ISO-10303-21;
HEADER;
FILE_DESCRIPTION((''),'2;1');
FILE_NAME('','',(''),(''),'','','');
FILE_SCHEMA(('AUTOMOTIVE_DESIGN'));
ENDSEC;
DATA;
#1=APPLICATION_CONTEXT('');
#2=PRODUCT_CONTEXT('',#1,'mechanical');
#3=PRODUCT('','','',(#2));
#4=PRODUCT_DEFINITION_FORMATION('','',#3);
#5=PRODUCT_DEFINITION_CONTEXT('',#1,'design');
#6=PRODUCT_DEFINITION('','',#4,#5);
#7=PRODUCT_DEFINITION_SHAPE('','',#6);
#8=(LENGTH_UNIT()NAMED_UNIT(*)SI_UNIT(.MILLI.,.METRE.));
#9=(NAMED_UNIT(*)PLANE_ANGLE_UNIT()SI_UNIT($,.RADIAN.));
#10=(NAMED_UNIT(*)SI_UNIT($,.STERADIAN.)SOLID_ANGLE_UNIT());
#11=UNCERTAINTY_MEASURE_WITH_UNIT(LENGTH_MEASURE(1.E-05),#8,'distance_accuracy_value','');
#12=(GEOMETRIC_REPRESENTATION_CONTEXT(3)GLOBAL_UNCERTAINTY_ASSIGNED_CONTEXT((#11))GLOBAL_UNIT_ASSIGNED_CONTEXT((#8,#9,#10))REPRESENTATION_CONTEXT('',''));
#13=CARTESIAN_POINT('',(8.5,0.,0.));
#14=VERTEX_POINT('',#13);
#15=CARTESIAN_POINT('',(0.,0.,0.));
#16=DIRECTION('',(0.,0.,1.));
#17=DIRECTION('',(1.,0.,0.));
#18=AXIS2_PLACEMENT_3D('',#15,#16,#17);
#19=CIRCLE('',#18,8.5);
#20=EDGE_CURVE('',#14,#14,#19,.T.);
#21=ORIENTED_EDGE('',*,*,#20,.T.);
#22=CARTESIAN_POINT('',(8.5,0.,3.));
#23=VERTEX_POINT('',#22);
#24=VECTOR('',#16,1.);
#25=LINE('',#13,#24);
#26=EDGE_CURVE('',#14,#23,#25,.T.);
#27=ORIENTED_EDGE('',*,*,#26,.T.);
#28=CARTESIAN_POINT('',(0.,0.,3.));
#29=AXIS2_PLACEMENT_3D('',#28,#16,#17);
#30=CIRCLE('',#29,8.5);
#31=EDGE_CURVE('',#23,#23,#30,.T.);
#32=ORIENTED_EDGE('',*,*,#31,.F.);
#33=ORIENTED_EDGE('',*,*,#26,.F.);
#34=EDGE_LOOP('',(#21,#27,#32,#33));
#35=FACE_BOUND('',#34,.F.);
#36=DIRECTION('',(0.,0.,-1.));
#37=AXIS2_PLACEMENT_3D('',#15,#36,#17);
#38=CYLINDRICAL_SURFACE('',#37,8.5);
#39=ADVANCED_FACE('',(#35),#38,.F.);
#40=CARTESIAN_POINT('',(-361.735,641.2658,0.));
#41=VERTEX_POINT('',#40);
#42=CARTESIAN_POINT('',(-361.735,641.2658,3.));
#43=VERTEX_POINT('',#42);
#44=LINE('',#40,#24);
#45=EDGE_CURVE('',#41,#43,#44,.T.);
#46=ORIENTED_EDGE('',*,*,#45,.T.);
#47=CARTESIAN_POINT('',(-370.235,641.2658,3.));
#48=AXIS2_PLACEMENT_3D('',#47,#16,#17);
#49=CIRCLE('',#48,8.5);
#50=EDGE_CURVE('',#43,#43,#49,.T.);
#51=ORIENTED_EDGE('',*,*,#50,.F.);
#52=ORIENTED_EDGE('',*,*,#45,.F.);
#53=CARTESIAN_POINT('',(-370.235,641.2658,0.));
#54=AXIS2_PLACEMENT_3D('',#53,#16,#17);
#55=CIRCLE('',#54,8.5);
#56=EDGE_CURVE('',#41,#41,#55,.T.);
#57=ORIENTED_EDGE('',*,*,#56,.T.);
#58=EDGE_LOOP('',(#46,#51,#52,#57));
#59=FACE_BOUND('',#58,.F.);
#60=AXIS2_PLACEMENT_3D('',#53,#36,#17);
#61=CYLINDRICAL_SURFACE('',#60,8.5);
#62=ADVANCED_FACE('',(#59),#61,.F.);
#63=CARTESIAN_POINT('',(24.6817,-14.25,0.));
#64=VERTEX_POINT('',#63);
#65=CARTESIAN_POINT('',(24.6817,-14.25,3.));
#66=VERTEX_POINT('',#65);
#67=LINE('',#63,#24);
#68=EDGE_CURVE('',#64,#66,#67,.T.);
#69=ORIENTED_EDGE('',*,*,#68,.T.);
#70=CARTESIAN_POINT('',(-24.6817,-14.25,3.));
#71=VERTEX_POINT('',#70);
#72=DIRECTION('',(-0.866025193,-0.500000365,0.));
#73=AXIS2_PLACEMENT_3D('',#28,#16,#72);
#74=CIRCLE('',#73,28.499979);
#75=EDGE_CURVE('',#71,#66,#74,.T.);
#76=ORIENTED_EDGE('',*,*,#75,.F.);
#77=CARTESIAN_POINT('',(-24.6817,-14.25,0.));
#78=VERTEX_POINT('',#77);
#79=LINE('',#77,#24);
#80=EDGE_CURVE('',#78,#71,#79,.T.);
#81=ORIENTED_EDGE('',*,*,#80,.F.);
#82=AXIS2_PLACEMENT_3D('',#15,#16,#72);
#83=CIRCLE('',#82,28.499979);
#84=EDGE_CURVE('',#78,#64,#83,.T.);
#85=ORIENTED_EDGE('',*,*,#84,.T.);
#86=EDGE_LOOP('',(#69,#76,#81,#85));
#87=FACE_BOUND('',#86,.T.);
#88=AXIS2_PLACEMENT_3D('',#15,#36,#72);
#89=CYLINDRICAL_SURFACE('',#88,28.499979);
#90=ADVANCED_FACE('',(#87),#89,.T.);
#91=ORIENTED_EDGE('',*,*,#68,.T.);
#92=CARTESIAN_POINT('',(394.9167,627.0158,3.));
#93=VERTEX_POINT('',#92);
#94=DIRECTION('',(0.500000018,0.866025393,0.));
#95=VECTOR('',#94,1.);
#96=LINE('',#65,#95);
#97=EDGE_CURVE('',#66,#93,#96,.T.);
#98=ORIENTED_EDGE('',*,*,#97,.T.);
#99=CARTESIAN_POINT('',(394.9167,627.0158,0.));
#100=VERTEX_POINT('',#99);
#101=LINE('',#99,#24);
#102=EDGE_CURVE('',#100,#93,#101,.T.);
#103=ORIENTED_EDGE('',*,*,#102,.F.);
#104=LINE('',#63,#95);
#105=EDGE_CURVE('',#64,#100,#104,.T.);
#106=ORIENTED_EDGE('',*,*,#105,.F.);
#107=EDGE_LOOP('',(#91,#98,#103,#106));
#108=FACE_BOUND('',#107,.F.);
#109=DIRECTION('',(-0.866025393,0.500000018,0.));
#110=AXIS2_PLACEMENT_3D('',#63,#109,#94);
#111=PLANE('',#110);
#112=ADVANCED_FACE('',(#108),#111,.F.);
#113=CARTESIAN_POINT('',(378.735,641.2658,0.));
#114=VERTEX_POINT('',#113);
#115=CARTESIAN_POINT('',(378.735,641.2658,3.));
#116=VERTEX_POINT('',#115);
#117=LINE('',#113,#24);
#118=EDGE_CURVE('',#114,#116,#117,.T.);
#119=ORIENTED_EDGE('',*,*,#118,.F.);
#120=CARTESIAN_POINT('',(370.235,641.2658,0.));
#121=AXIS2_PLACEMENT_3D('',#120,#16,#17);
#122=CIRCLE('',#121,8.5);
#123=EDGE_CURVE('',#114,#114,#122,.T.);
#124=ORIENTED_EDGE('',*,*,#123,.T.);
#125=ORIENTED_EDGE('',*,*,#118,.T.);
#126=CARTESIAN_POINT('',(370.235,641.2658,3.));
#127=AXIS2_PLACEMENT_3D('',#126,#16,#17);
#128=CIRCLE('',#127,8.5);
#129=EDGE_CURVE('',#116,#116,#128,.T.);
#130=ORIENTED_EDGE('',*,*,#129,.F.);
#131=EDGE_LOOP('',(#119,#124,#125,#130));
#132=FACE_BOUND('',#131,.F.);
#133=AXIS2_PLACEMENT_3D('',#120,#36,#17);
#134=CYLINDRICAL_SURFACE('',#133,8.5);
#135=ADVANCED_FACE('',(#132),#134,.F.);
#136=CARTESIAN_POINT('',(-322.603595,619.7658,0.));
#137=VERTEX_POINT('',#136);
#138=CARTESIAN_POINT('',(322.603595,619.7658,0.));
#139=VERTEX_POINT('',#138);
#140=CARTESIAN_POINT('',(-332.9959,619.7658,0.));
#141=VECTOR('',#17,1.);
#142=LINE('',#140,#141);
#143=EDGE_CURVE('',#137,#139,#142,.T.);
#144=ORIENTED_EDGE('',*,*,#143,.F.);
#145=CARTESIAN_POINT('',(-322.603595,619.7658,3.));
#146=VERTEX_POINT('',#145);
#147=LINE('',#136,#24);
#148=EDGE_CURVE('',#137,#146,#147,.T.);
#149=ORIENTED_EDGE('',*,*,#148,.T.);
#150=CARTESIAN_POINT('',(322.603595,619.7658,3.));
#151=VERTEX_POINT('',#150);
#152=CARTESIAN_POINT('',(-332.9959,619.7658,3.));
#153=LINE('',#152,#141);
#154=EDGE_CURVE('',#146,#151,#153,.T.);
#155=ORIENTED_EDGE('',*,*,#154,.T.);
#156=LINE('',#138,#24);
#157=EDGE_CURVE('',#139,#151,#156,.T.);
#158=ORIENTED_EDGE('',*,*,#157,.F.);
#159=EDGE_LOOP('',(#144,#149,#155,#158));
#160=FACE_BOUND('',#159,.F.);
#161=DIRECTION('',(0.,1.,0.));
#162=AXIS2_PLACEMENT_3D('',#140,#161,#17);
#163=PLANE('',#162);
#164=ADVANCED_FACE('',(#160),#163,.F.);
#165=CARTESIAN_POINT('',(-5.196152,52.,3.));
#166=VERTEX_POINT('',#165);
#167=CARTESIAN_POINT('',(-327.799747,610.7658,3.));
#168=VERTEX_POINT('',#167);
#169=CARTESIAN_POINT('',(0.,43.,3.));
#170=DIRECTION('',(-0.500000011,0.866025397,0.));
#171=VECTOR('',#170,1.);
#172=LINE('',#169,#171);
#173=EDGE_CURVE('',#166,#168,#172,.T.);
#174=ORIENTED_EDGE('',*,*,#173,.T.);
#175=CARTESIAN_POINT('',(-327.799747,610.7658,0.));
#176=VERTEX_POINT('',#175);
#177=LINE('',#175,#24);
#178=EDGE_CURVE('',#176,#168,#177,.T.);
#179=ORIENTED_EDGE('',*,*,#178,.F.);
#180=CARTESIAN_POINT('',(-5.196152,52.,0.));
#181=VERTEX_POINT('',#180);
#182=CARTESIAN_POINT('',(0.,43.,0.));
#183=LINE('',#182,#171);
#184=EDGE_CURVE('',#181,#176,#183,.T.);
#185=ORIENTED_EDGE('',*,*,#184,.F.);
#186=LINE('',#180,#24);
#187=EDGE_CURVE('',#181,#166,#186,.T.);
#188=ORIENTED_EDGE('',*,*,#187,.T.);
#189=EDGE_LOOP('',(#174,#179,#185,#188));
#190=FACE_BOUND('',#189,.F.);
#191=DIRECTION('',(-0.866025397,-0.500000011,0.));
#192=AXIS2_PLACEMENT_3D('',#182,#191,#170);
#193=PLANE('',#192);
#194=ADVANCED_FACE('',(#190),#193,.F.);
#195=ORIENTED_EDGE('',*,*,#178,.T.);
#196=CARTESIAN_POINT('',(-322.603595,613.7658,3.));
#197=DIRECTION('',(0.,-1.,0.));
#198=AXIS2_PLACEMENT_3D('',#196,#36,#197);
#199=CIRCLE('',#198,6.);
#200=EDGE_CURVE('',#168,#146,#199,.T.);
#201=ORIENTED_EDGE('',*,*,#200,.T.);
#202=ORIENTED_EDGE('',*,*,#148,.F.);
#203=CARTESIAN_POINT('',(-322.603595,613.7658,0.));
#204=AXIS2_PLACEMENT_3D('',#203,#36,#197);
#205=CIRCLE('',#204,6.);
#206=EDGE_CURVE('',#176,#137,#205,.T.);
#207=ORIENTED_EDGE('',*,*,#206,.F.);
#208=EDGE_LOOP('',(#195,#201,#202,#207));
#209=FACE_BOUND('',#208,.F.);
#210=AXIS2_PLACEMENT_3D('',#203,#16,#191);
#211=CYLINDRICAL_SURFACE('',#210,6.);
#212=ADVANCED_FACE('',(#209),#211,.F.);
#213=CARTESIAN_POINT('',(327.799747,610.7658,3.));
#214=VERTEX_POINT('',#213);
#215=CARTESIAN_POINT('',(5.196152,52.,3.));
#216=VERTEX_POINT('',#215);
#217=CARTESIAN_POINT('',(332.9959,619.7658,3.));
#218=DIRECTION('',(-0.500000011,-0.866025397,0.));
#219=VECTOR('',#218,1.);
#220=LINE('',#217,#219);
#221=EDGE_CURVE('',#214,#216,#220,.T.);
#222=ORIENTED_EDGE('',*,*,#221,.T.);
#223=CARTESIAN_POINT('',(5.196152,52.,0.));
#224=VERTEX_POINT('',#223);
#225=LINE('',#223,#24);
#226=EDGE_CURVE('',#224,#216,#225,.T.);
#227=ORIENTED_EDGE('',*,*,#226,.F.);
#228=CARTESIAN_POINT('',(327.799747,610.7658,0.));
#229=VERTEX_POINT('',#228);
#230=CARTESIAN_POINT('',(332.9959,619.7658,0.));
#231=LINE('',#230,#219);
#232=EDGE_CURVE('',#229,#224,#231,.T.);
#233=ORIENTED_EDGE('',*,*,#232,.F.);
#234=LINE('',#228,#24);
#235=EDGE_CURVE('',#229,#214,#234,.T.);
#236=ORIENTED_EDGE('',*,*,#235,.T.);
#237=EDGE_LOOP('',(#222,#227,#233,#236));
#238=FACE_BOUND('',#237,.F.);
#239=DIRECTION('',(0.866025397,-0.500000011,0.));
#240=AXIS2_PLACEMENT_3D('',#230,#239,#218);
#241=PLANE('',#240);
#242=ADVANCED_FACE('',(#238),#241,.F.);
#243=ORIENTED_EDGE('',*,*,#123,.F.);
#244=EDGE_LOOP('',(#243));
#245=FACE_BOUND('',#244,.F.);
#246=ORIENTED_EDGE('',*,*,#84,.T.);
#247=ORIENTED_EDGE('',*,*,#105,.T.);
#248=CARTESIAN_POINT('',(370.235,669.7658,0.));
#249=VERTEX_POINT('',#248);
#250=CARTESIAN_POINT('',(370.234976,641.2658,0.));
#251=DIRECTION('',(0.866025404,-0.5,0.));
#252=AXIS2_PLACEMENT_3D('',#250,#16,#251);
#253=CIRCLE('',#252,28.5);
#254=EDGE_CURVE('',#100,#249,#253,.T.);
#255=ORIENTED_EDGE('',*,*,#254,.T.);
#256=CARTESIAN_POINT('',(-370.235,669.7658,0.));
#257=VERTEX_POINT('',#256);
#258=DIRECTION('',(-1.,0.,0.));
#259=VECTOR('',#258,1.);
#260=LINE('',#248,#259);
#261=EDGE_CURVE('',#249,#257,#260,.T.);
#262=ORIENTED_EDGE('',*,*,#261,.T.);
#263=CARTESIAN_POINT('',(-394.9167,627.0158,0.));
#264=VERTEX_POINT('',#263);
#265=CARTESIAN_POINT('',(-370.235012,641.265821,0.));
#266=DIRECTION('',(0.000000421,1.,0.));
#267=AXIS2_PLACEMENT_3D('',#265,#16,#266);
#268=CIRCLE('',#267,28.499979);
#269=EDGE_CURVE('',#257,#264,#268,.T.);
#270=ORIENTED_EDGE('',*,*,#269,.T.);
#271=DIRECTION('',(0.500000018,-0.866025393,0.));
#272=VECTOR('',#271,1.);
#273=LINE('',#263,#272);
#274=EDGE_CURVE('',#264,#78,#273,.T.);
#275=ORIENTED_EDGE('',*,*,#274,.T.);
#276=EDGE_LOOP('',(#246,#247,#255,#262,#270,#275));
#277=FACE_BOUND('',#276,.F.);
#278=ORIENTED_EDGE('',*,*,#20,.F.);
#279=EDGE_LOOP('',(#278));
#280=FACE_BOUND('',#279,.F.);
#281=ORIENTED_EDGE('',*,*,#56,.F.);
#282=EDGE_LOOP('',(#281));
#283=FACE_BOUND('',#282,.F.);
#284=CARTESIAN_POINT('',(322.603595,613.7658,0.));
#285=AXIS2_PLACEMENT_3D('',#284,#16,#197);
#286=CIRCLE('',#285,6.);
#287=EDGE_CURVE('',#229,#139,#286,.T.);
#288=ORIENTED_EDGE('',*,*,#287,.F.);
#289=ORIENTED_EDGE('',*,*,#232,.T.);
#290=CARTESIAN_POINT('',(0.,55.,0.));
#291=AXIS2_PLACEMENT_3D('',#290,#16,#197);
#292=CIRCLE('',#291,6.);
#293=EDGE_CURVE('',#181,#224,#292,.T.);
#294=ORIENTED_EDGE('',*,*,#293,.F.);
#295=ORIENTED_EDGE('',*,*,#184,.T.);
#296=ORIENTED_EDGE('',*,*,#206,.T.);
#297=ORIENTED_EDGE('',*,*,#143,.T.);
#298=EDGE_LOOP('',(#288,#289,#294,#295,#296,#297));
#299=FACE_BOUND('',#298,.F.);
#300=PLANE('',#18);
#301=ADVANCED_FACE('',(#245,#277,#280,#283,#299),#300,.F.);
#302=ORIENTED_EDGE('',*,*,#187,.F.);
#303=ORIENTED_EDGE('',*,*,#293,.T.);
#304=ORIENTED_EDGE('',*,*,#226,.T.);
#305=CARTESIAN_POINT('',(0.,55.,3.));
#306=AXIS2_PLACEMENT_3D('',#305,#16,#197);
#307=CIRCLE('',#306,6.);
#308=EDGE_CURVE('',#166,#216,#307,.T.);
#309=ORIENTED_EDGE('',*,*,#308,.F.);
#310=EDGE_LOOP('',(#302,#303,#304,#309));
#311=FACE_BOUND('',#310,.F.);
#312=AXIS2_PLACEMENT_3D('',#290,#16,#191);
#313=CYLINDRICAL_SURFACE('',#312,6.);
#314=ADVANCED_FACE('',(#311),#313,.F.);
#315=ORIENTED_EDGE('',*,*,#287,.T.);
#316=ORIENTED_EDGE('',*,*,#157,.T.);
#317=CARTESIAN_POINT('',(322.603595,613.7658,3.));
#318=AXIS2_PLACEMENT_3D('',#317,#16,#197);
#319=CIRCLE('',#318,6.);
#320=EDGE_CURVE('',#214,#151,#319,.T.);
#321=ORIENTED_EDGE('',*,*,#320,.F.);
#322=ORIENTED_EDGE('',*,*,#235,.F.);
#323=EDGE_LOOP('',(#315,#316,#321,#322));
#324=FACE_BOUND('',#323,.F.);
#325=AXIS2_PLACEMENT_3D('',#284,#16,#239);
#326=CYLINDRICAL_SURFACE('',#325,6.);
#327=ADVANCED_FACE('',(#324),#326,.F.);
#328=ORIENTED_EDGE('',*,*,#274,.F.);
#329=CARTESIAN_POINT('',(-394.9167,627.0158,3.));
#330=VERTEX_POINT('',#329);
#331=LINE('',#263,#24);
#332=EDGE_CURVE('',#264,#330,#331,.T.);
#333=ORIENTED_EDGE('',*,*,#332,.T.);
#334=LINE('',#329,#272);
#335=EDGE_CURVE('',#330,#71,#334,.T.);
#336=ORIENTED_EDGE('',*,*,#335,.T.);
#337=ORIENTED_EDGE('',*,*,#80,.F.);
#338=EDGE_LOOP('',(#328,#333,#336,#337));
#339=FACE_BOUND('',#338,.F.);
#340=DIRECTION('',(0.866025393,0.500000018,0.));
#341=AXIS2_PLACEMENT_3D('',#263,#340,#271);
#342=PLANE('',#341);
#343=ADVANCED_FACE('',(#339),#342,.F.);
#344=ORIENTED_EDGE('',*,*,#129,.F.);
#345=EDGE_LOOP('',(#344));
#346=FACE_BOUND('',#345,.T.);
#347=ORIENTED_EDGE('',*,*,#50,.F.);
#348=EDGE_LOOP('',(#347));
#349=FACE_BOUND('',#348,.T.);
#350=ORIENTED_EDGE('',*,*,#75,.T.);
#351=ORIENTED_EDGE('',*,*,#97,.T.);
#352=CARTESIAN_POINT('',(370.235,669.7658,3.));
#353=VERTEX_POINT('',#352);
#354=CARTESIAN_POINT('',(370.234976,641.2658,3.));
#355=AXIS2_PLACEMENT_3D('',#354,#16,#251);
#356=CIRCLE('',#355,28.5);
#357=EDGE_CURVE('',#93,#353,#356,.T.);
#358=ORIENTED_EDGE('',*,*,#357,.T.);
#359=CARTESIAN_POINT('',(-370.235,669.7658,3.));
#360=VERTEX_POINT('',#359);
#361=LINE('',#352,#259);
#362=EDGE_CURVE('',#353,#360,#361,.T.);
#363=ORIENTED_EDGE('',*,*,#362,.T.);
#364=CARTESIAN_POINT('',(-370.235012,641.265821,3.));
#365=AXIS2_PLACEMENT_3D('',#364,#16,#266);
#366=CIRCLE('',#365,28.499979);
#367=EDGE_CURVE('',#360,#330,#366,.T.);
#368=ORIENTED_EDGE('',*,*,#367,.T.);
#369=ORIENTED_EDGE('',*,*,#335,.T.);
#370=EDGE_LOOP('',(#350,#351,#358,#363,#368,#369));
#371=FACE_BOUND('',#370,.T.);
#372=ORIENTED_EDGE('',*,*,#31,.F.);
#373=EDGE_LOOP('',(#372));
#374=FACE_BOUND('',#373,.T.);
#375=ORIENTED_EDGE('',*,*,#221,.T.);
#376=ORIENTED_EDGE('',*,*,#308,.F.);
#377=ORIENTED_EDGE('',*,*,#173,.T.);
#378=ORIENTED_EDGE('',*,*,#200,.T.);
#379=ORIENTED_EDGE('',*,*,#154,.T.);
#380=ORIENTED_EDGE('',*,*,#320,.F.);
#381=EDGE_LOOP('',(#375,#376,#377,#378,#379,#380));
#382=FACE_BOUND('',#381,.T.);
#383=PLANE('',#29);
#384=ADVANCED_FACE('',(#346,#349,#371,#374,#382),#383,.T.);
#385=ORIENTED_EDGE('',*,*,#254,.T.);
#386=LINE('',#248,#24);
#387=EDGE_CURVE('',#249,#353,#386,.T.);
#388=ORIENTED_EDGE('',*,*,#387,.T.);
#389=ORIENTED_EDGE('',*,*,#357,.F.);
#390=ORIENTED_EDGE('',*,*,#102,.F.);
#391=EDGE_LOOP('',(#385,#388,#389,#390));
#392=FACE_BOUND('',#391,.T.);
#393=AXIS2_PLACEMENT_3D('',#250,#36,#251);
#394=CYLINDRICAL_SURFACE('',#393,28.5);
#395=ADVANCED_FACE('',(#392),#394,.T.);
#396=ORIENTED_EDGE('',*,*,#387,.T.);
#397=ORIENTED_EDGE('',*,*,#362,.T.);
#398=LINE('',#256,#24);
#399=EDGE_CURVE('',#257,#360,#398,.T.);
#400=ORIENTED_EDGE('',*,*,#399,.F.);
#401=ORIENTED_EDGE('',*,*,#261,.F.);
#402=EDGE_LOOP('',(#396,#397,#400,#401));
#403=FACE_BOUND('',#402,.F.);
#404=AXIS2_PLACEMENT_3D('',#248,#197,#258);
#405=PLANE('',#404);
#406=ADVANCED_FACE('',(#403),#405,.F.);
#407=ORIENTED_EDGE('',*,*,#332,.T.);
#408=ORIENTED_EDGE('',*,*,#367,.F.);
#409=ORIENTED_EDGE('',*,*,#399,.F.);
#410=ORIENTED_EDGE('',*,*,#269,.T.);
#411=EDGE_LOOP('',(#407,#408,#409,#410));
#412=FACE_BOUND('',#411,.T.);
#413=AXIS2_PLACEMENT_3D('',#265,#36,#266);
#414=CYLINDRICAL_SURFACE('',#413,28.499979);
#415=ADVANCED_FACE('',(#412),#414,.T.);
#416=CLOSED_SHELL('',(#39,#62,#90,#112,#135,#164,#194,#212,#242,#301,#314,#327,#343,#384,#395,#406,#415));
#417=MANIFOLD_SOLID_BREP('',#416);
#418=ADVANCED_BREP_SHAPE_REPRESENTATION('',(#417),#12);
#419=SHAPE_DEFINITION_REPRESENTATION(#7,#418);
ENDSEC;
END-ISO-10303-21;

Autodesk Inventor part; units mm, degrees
ref_plane "YZ Plane" through (0, 0, 0) normal (1, 0, 0) x (0, 1, 0)
ref_plane "XZ Plane" through (0, 0, 0) normal (0, 1, 0) x (-1, 0, 0)
ref_plane "XY Plane" through (0, 0, 0) normal (0, 0, 1) x (1, 0, 0)
sketch "Sketch1" plane through (0, 0, 0) normal (0, 0, 1) x (1, 0, 0)
  circle A0 centre (0, 0) radius 8.5
  line L0 (-394.9167, 627.0158) -> (-24.6817, -14.25)
  arc A1 (-24.6817, -14.25) -> (24.6817, -14.25) centre (0, 0) ccw
  line L1 (24.6817, -14.25) -> (394.9167, 627.0158)
  arc A2 (394.9167, 627.0158) -> (370.235, 669.7658) centre (370.235, 641.2658) ccw
  line L2 (370.235, 669.7658) -> (-370.235, 669.7658)
  arc A3 (-370.235, 669.7658) -> (-394.9167, 627.0158) centre (-370.235, 641.2658) ccw
  line L3 (0, 0) -> (0, 669.7658) construction
  line L4 (-332.9959, 619.7658) -> (332.9959, 619.7658)
  line L5 (332.9959, 619.7658) -> (0, 43)
  line L6 (0, 43) -> (-332.9959, 619.7658)
  circle A4 centre (-370.235, 641.2658) radius 8.5
  circle A5 centre (370.235, 641.2658) radius 8.5
  dimension "d34" = 17
  dimension "d35" = 20
  dimension "d36" = 740.47
  dimension "d37" = 740.47
  dimension "d38" = 50
extrude "Plate1" add sketch "Sketch1" along normal blind 3
fillet "Corner Round3" radius 6 3 edges at (-332.9959, 619.7658, 1.5) (0, 43, 1.5) (332.9959, 619.7658, 1.5)
equation "\"d37\" = d36"
equation "\"d2\" = Thickness"
equation "\"BendReliefWidth\" = Thickness"
equation "\"BendReliefDepth\" = 0.5 * Thickness"
equation "\"CornerReliefSize\" = 4 * Thickness"
equation "\"MinimumRemnant\" = 2 * Thickness"
equation "\"TransitionRadius\" = BendRadius"
equation "\"JacobiRadiusSize\" = BendRadius"
equation "\"GapSize\" = Thickness"
equation "\"Thickness\" = 3"
equation "\"BendRadius\" = 5"
properties part number "PNS 1696 leg floor pattern" material "Stainless Steel"
